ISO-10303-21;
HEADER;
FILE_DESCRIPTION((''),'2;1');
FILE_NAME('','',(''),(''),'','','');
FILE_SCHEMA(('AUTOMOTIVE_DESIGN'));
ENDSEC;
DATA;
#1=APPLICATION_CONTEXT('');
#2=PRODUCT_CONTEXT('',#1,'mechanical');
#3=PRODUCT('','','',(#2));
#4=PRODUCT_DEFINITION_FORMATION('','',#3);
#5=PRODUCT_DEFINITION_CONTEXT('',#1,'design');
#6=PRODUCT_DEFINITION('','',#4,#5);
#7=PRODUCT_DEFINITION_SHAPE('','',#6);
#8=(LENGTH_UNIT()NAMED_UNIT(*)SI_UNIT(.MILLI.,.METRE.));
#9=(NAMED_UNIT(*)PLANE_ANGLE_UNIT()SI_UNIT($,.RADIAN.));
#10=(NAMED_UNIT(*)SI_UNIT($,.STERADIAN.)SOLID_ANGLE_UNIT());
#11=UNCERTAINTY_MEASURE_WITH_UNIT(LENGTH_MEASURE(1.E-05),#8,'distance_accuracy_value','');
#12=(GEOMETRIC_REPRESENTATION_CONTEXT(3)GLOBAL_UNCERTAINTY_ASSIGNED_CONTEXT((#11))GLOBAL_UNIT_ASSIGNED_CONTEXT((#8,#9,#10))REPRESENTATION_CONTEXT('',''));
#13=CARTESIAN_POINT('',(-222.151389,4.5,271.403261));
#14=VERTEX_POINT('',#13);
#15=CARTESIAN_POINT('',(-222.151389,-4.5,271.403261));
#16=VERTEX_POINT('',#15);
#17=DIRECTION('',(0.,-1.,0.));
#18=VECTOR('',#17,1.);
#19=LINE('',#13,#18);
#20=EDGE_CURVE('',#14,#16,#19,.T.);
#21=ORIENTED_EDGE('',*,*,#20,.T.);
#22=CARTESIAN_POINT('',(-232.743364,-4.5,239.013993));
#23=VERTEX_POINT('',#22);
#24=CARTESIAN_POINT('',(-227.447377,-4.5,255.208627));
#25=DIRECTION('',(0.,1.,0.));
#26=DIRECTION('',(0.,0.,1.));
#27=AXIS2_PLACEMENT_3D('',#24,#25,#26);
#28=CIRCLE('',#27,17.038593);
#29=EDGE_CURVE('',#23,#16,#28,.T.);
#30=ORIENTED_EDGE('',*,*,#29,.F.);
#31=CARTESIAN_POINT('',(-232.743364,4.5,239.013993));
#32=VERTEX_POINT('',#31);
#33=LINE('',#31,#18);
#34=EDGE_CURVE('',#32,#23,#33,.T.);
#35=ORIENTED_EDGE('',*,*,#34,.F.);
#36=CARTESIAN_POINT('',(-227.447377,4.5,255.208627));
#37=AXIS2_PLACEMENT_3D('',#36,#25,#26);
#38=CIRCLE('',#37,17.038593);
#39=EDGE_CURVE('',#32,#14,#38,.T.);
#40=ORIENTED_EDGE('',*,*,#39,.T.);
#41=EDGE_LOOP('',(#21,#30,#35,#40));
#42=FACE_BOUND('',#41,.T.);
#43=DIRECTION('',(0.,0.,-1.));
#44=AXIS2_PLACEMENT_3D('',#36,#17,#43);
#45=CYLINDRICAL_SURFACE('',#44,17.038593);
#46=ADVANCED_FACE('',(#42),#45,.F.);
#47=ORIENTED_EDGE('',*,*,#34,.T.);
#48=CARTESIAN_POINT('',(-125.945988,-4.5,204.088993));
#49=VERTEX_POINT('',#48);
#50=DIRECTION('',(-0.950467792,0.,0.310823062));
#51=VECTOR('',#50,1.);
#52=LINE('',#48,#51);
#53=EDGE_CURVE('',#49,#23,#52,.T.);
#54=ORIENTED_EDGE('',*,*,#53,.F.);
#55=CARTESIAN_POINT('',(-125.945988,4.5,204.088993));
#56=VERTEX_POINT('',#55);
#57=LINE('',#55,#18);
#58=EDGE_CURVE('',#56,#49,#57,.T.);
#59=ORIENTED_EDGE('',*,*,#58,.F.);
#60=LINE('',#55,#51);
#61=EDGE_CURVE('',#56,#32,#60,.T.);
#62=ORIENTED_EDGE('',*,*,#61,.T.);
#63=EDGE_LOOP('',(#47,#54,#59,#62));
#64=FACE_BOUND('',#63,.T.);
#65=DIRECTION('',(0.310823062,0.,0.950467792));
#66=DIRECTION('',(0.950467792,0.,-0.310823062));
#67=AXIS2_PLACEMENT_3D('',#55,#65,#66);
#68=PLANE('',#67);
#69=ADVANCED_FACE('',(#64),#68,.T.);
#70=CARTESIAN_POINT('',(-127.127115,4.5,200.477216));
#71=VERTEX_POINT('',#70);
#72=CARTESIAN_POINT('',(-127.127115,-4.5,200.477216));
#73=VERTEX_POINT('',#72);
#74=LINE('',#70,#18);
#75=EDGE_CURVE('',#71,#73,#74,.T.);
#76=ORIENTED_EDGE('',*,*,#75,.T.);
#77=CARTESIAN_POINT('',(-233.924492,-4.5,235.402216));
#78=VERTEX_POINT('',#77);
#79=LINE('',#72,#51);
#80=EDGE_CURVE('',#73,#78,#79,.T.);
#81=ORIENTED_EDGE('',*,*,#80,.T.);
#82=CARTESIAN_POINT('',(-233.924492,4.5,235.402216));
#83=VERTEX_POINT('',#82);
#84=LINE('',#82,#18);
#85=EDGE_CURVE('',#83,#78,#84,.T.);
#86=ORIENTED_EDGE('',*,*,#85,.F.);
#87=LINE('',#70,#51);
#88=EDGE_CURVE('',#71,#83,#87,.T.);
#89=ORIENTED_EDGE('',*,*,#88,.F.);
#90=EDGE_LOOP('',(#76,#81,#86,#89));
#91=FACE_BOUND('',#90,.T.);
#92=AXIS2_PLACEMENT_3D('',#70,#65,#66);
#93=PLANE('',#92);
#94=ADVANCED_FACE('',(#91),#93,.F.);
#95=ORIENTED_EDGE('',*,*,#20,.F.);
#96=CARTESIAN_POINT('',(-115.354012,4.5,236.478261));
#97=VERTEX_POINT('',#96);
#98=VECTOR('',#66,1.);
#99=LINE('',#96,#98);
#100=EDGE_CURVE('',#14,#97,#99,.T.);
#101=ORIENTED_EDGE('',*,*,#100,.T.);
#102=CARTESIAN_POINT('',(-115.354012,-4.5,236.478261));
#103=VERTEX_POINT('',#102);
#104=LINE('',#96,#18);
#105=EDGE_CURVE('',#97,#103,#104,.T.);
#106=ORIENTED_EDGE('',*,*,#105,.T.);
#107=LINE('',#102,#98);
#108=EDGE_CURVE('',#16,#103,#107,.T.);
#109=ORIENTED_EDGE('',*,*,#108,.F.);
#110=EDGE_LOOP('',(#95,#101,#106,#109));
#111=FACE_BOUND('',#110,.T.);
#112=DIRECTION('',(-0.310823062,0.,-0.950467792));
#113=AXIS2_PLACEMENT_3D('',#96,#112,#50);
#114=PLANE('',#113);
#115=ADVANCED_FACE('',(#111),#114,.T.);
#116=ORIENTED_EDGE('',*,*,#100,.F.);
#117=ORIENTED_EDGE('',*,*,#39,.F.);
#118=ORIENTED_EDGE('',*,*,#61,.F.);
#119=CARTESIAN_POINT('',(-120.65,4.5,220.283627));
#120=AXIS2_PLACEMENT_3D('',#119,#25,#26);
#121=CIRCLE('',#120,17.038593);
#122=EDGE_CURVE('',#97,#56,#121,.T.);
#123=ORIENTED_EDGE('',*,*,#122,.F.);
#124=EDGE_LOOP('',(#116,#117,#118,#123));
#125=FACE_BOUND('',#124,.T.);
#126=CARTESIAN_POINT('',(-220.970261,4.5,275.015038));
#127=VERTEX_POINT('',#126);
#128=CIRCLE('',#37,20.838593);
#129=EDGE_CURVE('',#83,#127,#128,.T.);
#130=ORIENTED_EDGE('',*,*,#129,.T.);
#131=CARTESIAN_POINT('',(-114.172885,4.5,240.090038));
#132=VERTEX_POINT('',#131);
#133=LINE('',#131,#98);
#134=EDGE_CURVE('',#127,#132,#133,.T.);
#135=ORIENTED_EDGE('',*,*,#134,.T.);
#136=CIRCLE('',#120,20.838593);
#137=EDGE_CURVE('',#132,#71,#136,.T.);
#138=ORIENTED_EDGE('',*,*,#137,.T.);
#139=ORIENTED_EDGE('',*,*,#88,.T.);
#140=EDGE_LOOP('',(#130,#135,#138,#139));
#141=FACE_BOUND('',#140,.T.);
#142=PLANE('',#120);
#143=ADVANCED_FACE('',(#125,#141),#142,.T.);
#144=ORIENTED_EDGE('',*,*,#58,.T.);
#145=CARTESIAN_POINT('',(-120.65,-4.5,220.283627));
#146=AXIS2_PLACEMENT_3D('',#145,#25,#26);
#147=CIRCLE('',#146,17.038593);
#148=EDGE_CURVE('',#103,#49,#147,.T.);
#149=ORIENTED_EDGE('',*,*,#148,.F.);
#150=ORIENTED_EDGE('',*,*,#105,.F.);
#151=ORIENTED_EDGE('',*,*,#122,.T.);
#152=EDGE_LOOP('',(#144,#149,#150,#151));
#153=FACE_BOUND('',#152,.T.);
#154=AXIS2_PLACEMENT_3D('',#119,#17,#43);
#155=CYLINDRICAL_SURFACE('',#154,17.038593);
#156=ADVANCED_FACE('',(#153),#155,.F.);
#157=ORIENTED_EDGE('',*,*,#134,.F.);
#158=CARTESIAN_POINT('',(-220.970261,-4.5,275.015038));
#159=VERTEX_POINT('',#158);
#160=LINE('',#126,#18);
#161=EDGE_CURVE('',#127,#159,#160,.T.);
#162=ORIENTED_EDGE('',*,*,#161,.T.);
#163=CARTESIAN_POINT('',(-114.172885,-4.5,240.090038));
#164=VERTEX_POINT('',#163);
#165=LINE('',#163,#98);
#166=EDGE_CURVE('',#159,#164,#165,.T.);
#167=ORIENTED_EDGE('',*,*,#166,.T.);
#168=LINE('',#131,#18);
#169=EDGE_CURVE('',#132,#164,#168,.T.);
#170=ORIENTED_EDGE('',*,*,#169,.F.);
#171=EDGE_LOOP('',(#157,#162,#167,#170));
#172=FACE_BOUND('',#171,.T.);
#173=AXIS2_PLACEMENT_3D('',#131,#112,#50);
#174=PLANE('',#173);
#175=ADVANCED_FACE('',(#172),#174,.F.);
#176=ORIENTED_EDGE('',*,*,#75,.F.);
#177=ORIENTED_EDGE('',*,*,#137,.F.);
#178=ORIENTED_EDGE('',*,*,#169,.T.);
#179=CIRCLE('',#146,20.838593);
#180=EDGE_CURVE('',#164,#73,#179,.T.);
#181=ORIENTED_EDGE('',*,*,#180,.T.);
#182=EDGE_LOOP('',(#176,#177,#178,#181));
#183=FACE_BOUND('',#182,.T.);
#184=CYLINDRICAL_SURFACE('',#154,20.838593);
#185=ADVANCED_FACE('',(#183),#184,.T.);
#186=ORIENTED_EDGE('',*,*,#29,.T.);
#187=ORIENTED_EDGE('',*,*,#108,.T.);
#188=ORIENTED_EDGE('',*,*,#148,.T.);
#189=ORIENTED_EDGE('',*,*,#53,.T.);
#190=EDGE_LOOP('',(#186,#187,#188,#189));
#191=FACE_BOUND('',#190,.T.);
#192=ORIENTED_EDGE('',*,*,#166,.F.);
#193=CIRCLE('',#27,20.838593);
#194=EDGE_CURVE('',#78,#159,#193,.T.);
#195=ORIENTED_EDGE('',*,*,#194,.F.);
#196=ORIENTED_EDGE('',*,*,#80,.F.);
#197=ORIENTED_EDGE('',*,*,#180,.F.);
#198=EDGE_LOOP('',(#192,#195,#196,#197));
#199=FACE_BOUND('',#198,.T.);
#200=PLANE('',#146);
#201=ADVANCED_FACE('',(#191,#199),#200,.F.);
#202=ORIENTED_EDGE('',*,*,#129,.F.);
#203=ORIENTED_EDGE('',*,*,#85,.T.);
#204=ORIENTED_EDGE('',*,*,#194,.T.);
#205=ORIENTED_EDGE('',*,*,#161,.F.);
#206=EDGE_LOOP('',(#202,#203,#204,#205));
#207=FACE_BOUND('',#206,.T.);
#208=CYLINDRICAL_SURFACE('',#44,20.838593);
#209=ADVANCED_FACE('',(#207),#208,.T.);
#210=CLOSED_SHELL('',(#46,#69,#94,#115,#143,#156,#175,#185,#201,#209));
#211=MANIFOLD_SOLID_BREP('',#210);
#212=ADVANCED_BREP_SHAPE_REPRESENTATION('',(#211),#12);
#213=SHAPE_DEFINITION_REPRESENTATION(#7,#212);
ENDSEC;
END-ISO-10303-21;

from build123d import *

# Parameters (mm, degrees)
CROQUIS42_R                        = 14.2875
CROQUIS42_R_2                      = 2.4892
CROQUIS42_R_3                      = 9.5631
EXTRUDE_4400_23_P_0501_DEPTH       = 6.35
EXTRUDE_4400_23_P_0502_OUTLINE_R   = 14.2875
EXTRUDE_4400_23_P_0502_OUTLINE_R_2 = 2.4892
EXTRUDE_4400_23_P_0502_DEPTH       = 6.35
CROQUIS47_R                        = 2.4892
CORTAR_EXTRUIR1_DEPTH              = 392.719699627
CROQUIS48_W                        = 203.2
CROQUIS48_H                        = 25.4
SALIENTE_EXTRUIR4_DEPTH            = 25.4
VACIADO1_T                         = -3.175
CROQUIS49_W                        = 50.8
CROQUIS49_H                        = 25.4
SALIENTE_EXTRUIR5_DEPTH            = 152.4
VACIADO2_T                         = -3.175
CROQUIS50_R                        = 14.3129
CROQUIS50_R_2                      = 2.4892
CORTAR_EXTRUIR2_DEPTH              = 539.610187059
CROQUIS53_R                        = 2.4892
SALIENTE_EXTRUIR6_DEPTH            = 3.175
CROQUIS55_R                        = 2.4892
CORTAR_EXTRUIR3_DEPTH              = 28.575
CORTAR_EXTRUIR4_DEPTH              = 420.505185398
CORTAR_EXTRUIR4_DEPTH_BACK         = 420.505185398
CROQUIS56_R                        = 3.2639
CROQUIS57_W                        = 50.8762
CROQUIS57_H                        = 25.4762
CORTAR_EXTRUIR5_DEPTH              = 6.35
SALIENTE_EXTRUIR7_DEPTH            = 4.5
SALIENTE_EXTRUIR9_DEPTH            = 4.5


# Read off the part's stored shape, not the designer's step: 4400-23-P-0502
with BuildPart() as part:
    # Croquis42 → 4400-23-P-0501 (new body)
    with BuildSketch(Plane(origin=(0, 184.15, 0), x_dir=(1, 0, 0), z_dir=(0, 1, 0))):
        with BuildLine():
            Line((88.359188985, 137.182253519), (-88.34651861, 137.182253519))
            ThreePointArc((-88.34651861, 137.182253519), (-105.337250829, 130.662799557), (-113.605912458, 114.451152627))
            Line((-113.605912458, 114.451152627), (-139.101589768, -126.848847373))
            ThreePointArc((-139.101589768, -126.848847373), (-140.353519458, -135.509571637), (-142.264354165, -144.049137401))
            ThreePointArc((-142.264354165, -144.049137401), (-151.832193089, -152.899040942), (-164.816388377, -151.769878826))
            ThreePointArc((-164.816388377, -151.769878826), (-169.567285608, -151.859959078), (-171.875550605, -156.013397612))
            ThreePointArc((-171.875550605, -156.013397612), (-178.08501659, -181.1261948), (-195.856181675, -199.925017686))
            ThreePointArc((-195.856181675, -199.925017686), (-196.402455792, -200.320741342), (-196.887342109, -200.789674047))
            Line((-196.887342109, -200.789674047), (-212.697786669, -218.412409382))
            ThreePointArc((-212.697786669, -218.412409382), (-217.730973382, -222.727024179), (-223.709210874, -225.59225468))
            Line((-223.709210874, -225.59225468), (-235.835713977, -229.557877567))
            ThreePointArc((-235.835713977, -229.557877567), (-253.324996625, -262.868518564), (-220.522053125, -281.292435328))
            Line((-220.522053125, -281.292435328), (-112.095188672, -252.504801968))
            ThreePointArc((-112.095188672, -252.504801968), (-87.673300223, -225.175066373), (-103.110565757, -191.933015956))
            ThreePointArc((-103.110565757, -191.933015956), (-118.079867963, -174.552433995), (-120.357522092, -151.727514948))
            Line((-120.357522092, -151.727514948), (-112.383619234, -113.627514948))
            ThreePointArc((-112.383619234, -113.627514948), (-101.768716069, -96.213982816), (-82.55, -89.391356987))
            ThreePointArc((-82.55, -89.391356987), (-62.030318089, -81.335848201), (-52.471032559, -61.472096599))
            Line((-52.471032559, -61.472096599), (-47.621676919, 3.551545851))
            ThreePointArc((-47.621676919, 3.551545851), (0, 47.753927487), (47.621676919, 3.551545851))
            Line((47.621676919, 3.551545851), (52.471032559, -61.472096599))
            ThreePointArc((52.471032559, -61.472096599), (62.030318089, -81.335848201), (82.55, -89.391356987))
            ThreePointArc((82.55, -89.391356987), (101.768716069, -96.213982816), (112.383619234, -113.627514948))
            Line((112.383619234, -113.627514948), (120.357522092, -151.727514948))
            ThreePointArc((120.357522092, -151.727514948), (118.079867963, -174.552433995), (103.110565757, -191.933015956))
            ThreePointArc((103.110565757, -191.933015956), (87.673300223, -225.175066373), (112.095188672, -252.504801968))
            Line((112.095188672, -252.504801968), (220.522053125, -281.292435328))
            ThreePointArc((220.522053125, -281.292435328), (253.324996625, -262.868518564), (235.835713977, -229.557877567))
            Line((235.835713977, -229.557877567), (223.709210874, -225.59225468))
            ThreePointArc((223.709210874, -225.59225468), (217.730973382, -222.727024179), (212.697786669, -218.412409382))
            Line((212.697786669, -218.412409382), (196.887342109, -200.789674047))
            ThreePointArc((196.887342109, -200.789674047), (196.402455792, -200.320741342), (195.856181675, -199.925017686))
            ThreePointArc((195.856181675, -199.925017686), (178.08501659, -181.1261948), (171.875550605, -156.013397612))
            ThreePointArc((171.875550605, -156.013397612), (169.567285608, -151.859959078), (164.816388377, -151.769878826))
            ThreePointArc((164.816388377, -151.769878826), (152.26322842, -153.039859148), (142.647258285, -144.87115097))
            ThreePointArc((142.647258285, -144.87115097), (140.583371058, -135.914425081), (139.245830086, -126.820825503))
            Line((139.245830086, -126.820825503), (113.617107402, 114.465079877))
            ThreePointArc((113.617107402, 114.465079877), (105.344715331, 130.667483058), (88.359188985, 137.182253519))
        make_face()
        with Locations(Location((-227.447376581, -255.208627108, 0), (0, 0, 270))):
            Circle(CROQUIS42_R, mode=Mode.SUBTRACT)
        with Locations(Location((-193.342405236, -203.970055914, 0), (0, 0, 270))):
            Circle(CROQUIS42_R_2, mode=Mode.SUBTRACT)
        with Locations(Location((-120.65, -220.283627108, 0), (0, 0, 270))):
            Circle(CROQUIS42_R, mode=Mode.SUBTRACT)
        with Locations(Location((-167.113590003, -155.941721458, 0), (0, 0, 270))):
            Circle(CROQUIS42_R_2, mode=Mode.SUBTRACT)
        with Locations(Location((120.65, -220.283627108, 0), (0, 0, 270))):
            Circle(CROQUIS42_R, mode=Mode.SUBTRACT)
        with Locations(Location((227.447376581, -255.208627108, 0), (0, 0, 270))):
            Circle(CROQUIS42_R, mode=Mode.SUBTRACT)
        with Locations(Location((167.113590003, -155.941721458, 0), (0, 0, 270))):
            Circle(CROQUIS42_R_2, mode=Mode.SUBTRACT)
        with Locations(Location((-82.55, -59.228856987, 0), (0, 0, 270))):
            Circle(CROQUIS42_R, mode=Mode.SUBTRACT)
        with Locations(Location((-82.55, 29.266072697, 0), (0, 0, 270))):
            Circle(CROQUIS42_R_2, mode=Mode.SUBTRACT)
        with Locations(Location((-107.95, 54.666072697, 0), (0, 0, 270))):
            Circle(CROQUIS42_R_2, mode=Mode.SUBTRACT)
        with Locations(Location((-82.55, 54.666072697, 0), (0, 0, 270))):
            Circle(CROQUIS42_R_3, mode=Mode.SUBTRACT)
        with Locations(Location((-82.55, 80.066072697, 0), (0, 0, 270))):
            Circle(CROQUIS42_R_2, mode=Mode.SUBTRACT)
        with Locations(Location((-57.15, 54.666072697, 0), (0, 0, 270))):
            Circle(CROQUIS42_R_2, mode=Mode.SUBTRACT)
        with Locations(Location((82.55, -59.228856987, 0), (0, 0, 270))):
            Circle(CROQUIS42_R, mode=Mode.SUBTRACT)
        with Locations(Location((82.55, 29.266072697, 0), (0, 0, 270))):
            Circle(CROQUIS42_R_2, mode=Mode.SUBTRACT)
        with Locations(Location((57.15, 54.666072697, 0), (0, 0, 270))):
            Circle(CROQUIS42_R_2, mode=Mode.SUBTRACT)
        with Locations(Location((82.55, 54.666072697, 0), (0, 0, 270))):
            Circle(CROQUIS42_R_3, mode=Mode.SUBTRACT)
        with Locations(Location((107.95, 54.666072697, 0), (0, 0, 270))):
            Circle(CROQUIS42_R_2, mode=Mode.SUBTRACT)
        with Locations(Location((82.55, 80.066072697, 0), (0, 0, 270))):
            Circle(CROQUIS42_R_2, mode=Mode.SUBTRACT)
        with Locations(Location((193.342405236, -203.970055914, 0), (0, 0, 270))):
            Circle(CROQUIS42_R_2, mode=Mode.SUBTRACT)
    extrude(amount=EXTRUDE_4400_23_P_0501_DEPTH)


with BuildPart() as body_2:
    # 4400-23-P-0502 outline → 4400-23-P-0502 (new body)
    with BuildSketch(Plane(origin=(0, 95.25, 0), x_dir=(1, 0, 0), z_dir=(0, 1, 0))):
        with BuildLine():
            Line((-113.605912458, 114.451152627), (-139.101589768, -126.848847373))
            ThreePointArc((-139.101589768, -126.848847373), (-140.353519458, -135.509571637), (-142.264354165, -144.049137401))
            ThreePointArc((-142.264354165, -144.049137401), (-151.832193089, -152.899040942), (-164.816388377, -151.769878826))
            ThreePointArc((-164.816388377, -151.769878826), (-169.567285608, -151.859959078), (-171.875550605, -156.013397612))
            ThreePointArc((-171.875550605, -156.013397612), (-178.08501659, -181.1261948), (-195.856181675, -199.925017686))
            Line((-195.856181675, -199.925017686), (-212.697786669, -218.412409382))
            ThreePointArc((-212.697786669, -218.412409382), (-217.730973382, -222.727024179), (-223.709210874, -225.59225468))
            Line((-223.709210874, -225.59225468), (-235.835713977, -229.557877567))
            ThreePointArc((-235.835713977, -229.557877567), (-253.324996625, -262.868518564), (-220.522053125, -281.292435328))
            Line((-220.522053125, -281.292435328), (-112.095188672, -252.504801968))
            ThreePointArc((-112.095188672, -252.504801968), (-87.673300223, -225.175066373), (-103.110565757, -191.933015956))
            ThreePointArc((-103.110565757, -191.933015956), (-118.079867963, -174.552433995), (-120.357522092, -151.727514948))
            Line((-120.357522092, -151.727514948), (-112.383619234, -113.627514948))
            ThreePointArc((-112.383619234, -113.627514948), (-100.293200153, -90.736166152), (-77.899975527, -77.74634036))
            ThreePointArc((-77.899975527, -77.74634036), (-67.495099348, -70.970657719), (-63.457595278, -59.228856987))
            Line((-63.457595278, -59.228856987), (-63.457595278, 0))
            ThreePointArc((-63.457595278, 0), (0, 63.457595278), (63.457595278, 0))
            Line((63.457595278, 0), (63.457595278, -59.228856987))
            ThreePointArc((63.457595278, -59.228856987), (67.495099348, -70.970657719), (77.899975527, -77.74634036))
            ThreePointArc((77.899975527, -77.74634036), (100.293200153, -90.736166152), (112.383619234, -113.627514948))
            Line((112.383619234, -113.627514948), (120.357522092, -151.727514948))
            ThreePointArc((120.357522092, -151.727514948), (118.079867963, -174.552433995), (103.110565757, -191.933015956))
            ThreePointArc((103.110565757, -191.933015956), (87.673300223, -225.175066373), (112.095188672, -252.504801968))
            Line((112.095188672, -252.504801968), (220.522053125, -281.292435328))
            ThreePointArc((220.522053125, -281.292435328), (253.324996625, -262.868518564), (235.835713977, -229.557877567))
            Line((235.835713977, -229.557877567), (223.709210874, -225.59225468))
            ThreePointArc((223.709210874, -225.59225468), (217.730973382, -222.727024179), (212.697786669, -218.412409382))
            Line((212.697786669, -218.412409382), (195.856181675, -199.925017686))
            ThreePointArc((195.856181675, -199.925017686), (178.08501659, -181.1261948), (171.875550605, -156.013397612))
            ThreePointArc((171.875550605, -156.013397612), (169.567285608, -151.859959078), (164.816388377, -151.769878826))
            ThreePointArc((164.816388377, -151.769878826), (151.832193089, -152.899040942), (142.264354165, -144.049137401))
            ThreePointArc((142.264354165, -144.049137401), (140.353519458, -135.509571637), (139.101589768, -126.848847373))
            Line((139.101589768, -126.848847373), (113.605912458, 114.451152627))
            ThreePointArc((113.605912458, 114.451152627), (105.341959426, 130.658561195), (88.359188984, 137.182250359))
            Line((88.359188984, 137.182250359), (-88.34651861, 137.182253519))
            ThreePointArc((-88.34651861, 137.182253519), (-105.337250829, 130.662799557), (-113.605912458, 114.451152627))
        make_face()
        with Locations((-227.447376581, -255.208627108)):
            Circle(EXTRUDE_4400_23_P_0502_OUTLINE_R, mode=Mode.SUBTRACT)
        with Locations((-193.342405236, -203.970055914)):
            Circle(EXTRUDE_4400_23_P_0502_OUTLINE_R_2, mode=Mode.SUBTRACT)
        with Locations((-120.65, -220.283627108)):
            Circle(EXTRUDE_4400_23_P_0502_OUTLINE_R, mode=Mode.SUBTRACT)
        with Locations((-167.113590003, -155.941721458)):
            Circle(EXTRUDE_4400_23_P_0502_OUTLINE_R_2, mode=Mode.SUBTRACT)
        with Locations((120.65, -220.283627108)):
            Circle(EXTRUDE_4400_23_P_0502_OUTLINE_R, mode=Mode.SUBTRACT)
        with Locations((227.447376581, -255.208627108)):
            Circle(EXTRUDE_4400_23_P_0502_OUTLINE_R, mode=Mode.SUBTRACT)
        with Locations((193.342405236, -203.970055914)):
            Circle(EXTRUDE_4400_23_P_0502_OUTLINE_R_2, mode=Mode.SUBTRACT)
        with Locations((167.113590003, -155.941721458)):
            Circle(EXTRUDE_4400_23_P_0502_OUTLINE_R_2, mode=Mode.SUBTRACT)
        with Locations((-82.55, -59.228856987)):
            Circle(EXTRUDE_4400_23_P_0502_OUTLINE_R, mode=Mode.SUBTRACT)
        with Locations((82.55, -59.228856987)):
            Circle(EXTRUDE_4400_23_P_0502_OUTLINE_R, mode=Mode.SUBTRACT)
    extrude(amount=EXTRUDE_4400_23_P_0502_DEPTH)


with BuildPart() as cortar_extruir1_tool:
    # Croquis47 → Cortar-Extruir1 (new, through all)
    with BuildSketch(Plane(origin=(0, 190.5, 0), x_dir=(1, 0, 0), z_dir=(0, 1, 0))):
        with Locations(Location((-131.508664667, -129.403842106, 0), (0, 0, 270))):
            Circle(CROQUIS47_R)
        with Locations(Location((-191.907087884, -241.47917412, 0), (0, 0, 270))):
            Circle(CROQUIS47_R)
        with Locations(Location((131.508664667, -129.403842106, 0), (0, 0, 270))):
            Circle(CROQUIS47_R)
        with Locations(Location((-117.606595202, -5.496427303, 0), (0, 0, 270))):
            Circle(CROQUIS47_R)
        with Locations(Location((-116.361466228, 16.971143013, 0), (0, 0, 270))):
            Circle(CROQUIS47_R)
        with Locations(Location((116.361466228, 16.971143013, 0), (0, 0, 270))):
            Circle(CROQUIS47_R)
        with Locations(Location((117.606595202, -5.496427303, 0), (0, 0, 270))):
            Circle(CROQUIS47_R)
        with Locations(Location((38.8975, 62.847528811, 0), (0, 0, 270))):
            Circle(CROQUIS47_R)
        with Locations(Location((4.820590175, 80.776381017, 0), (0, 0, 270))):
            Circle(CROQUIS47_R)
        with Locations(Location((-37.776259667, 66.128159842, 0), (0, 0, 270))):
            Circle(CROQUIS47_R)
        with Locations(Location((-84.246357442, 7.676072697, 0), (0, 0, 270))):
            Circle(CROQUIS47_R)
        with Locations(Location((191.907087884, -241.47917412, 0), (0, 0, 270))):
            Circle(CROQUIS47_R)
        with Locations(Location((84.246357442, 7.676072697, 0), (0, 0, 270))):
            Circle(CROQUIS47_R)
    extrude(amount=-CORTAR_EXTRUIR1_DEPTH)


with BuildPart() as part_1:
    add(part.part)

    # Cortar-Extruir1: cut by cortar_extruir1_tool
    add(cortar_extruir1_tool.part, mode=Mode.SUBTRACT)


with BuildPart() as body_2_1:
    add(body_2.part)

    # Cortar-Extruir1: cut by cortar_extruir1_tool
    add(cortar_extruir1_tool.part, mode=Mode.SUBTRACT)


with BuildPart() as body_3:
    # Croquis48 → Saliente-Extruir4 (new body)
    with BuildSketch(Plane(origin=(0, 101.6, 0), x_dir=(1, 0, 0), z_dir=(0, 1, 0))):
        with Locations((0, 114.3)):
            Rectangle(CROQUIS48_W, CROQUIS48_H)
    extrude(amount=SALIENTE_EXTRUIR4_DEPTH)

    # Vaciado1
    vaciado1_openings = [body_3.faces().sort_by_distance(p)[0] for p in [
        (-101.6, 114.3, -114.3),
        (101.6, 114.3, -114.3),
    ]]
    offset(amount=VACIADO1_T, openings=vaciado1_openings, kind=Kind.INTERSECTION)


with BuildPart() as body_4:
    # Croquis49 → Saliente-Extruir5 (new body)
    with BuildSketch(Plane(origin=(0, 127, 0), x_dir=(1, 0, 0), z_dir=(0, 1, 0))):
        with Locations((0, 114.3)):
            Rectangle(CROQUIS49_W, CROQUIS49_H)
    extrude(amount=SALIENTE_EXTRUIR5_DEPTH)

    # Vaciado2
    vaciado2_openings = [body_4.faces().sort_by_distance(p)[0] for p in [
        (0, 279.4, -114.3),
        (0, 127, -114.3),
    ]]
    offset(amount=VACIADO2_T, openings=vaciado2_openings, kind=Kind.INTERSECTION)

    # Croquis50 → Cortar-Extruir2 (cut, through all)
    with BuildSketch(Plane.XY.offset(-101.6)):
        with Locations((0, 241.2619)):
            Circle(CROQUIS50_R)
        with Locations((11.90625, 261.884129928)):
            Circle(CROQUIS50_R_2)
        with Locations((11.90625, 220.639670072)):
            Circle(CROQUIS50_R_2)
        with Locations((-11.90625, 220.639670072)):
            Circle(CROQUIS50_R_2)
        with Locations((-11.90625, 261.884129928)):
            Circle(CROQUIS50_R_2)
    extrude(amount=-CORTAR_EXTRUIR2_DEPTH, mode=Mode.SUBTRACT)


with BuildPart() as body_5:
    # Croquis53 → Saliente-Extruir6 (new body)
    with BuildSketch(Plane.XY.offset(-101.6)):
        with BuildLine():
            Line((50.8, 101.6), (-50.8, 101.6))
            ThreePointArc((-50.8, 101.6), (-55.290128061, 103.459871939), (-57.15, 107.95))
            Line((-57.15, 107.95), (-57.15, 125.348133557))
            ThreePointArc((-57.15, 125.348133557), (-56.945468654, 126.946793942), (-56.345050385, 128.44246971))
            Line((-56.345050385, 128.44246971), (-27.216776701, 180.640336153))
            ThreePointArc((-27.216776701, 180.640336153), (-24.886805275, 183.021926158), (-21.671726315, 183.896))
            Line((-21.671726315, 183.896), (21.671726315, 183.896))
            ThreePointArc((21.671726315, 183.896), (24.886805275, 183.021926158), (27.216776701, 180.640336153))
            Line((27.216776701, 180.640336153), (56.345050385, 128.44246971))
            ThreePointArc((56.345050385, 128.44246971), (56.945468654, 126.946793942), (57.15, 125.348133557))
            Line((57.15, 125.348133557), (57.15, 107.95))
            ThreePointArc((57.15, 107.95), (55.290128061, 103.459871939), (50.8, 101.6))
        make_face()
        with Locations((0, 114.3)):
            Circle(CROQUIS53_R, mode=Mode.SUBTRACT)
        with Locations((12.7, 114.3)):
            Circle(CROQUIS53_R, mode=Mode.SUBTRACT)
        with Locations((25.4, 114.3)):
            Circle(CROQUIS53_R, mode=Mode.SUBTRACT)
        with Locations((38.1, 114.3)):
            Circle(CROQUIS53_R, mode=Mode.SUBTRACT)
        with Locations((50.8, 114.3)):
            Circle(CROQUIS53_R, mode=Mode.SUBTRACT)
        with Locations(Location((-50.8, 114.3, 0), (0, 0, 180))):
            Circle(CROQUIS53_R, mode=Mode.SUBTRACT)
        with Locations(Location((-38.1, 114.3, 0), (0, 0, 180))):
            Circle(CROQUIS53_R, mode=Mode.SUBTRACT)
        with Locations(Location((-25.4, 114.3, 0), (0, 0, 180))):
            Circle(CROQUIS53_R, mode=Mode.SUBTRACT)
        with Locations(Location((-12.7, 114.3, 0), (0, 0, 180))):
            Circle(CROQUIS53_R, mode=Mode.SUBTRACT)
        with Locations(Location((-12.7, 139.7, 0), (0, 0, 180))):
            Circle(CROQUIS53_R, mode=Mode.SUBTRACT)
        with Locations((12.7, 139.7)):
            Circle(CROQUIS53_R, mode=Mode.SUBTRACT)
        with Locations(Location((-12.7, 152.4, 0), (0, 0, 180))):
            Circle(CROQUIS53_R, mode=Mode.SUBTRACT)
        with Locations((12.7, 152.4)):
            Circle(CROQUIS53_R, mode=Mode.SUBTRACT)
        with Locations(Location((-12.7, 165.1, 0), (0, 0, 180))):
            Circle(CROQUIS53_R, mode=Mode.SUBTRACT)
        with Locations((12.7, 165.1)):
            Circle(CROQUIS53_R, mode=Mode.SUBTRACT)
        with Locations(Location((-12.7, 177.8, 0), (0, 0, 180))):
            Circle(CROQUIS53_R, mode=Mode.SUBTRACT)
        with Locations((12.7, 177.8)):
            Circle(CROQUIS53_R, mode=Mode.SUBTRACT)
    extrude(amount=SALIENTE_EXTRUIR6_DEPTH)


with BuildPart() as cortar_extruir3_tool:
    # Croquis55 → Cortar-Extruir3 (new body)
    with BuildSketch(Plane.XY.offset(-98.425)):
        with Locations(Location((-12.7, 114.3, 0), (0, 0, 180))):
            Circle(CROQUIS55_R)
        with Locations(Location((-12.7, 139.7, 0), (0, 0, 180))):
            Circle(CROQUIS55_R)
        with Locations(Location((-25.4, 114.3, 0), (0, 0, 180))):
            Circle(CROQUIS55_R)
        with Locations(Location((-38.1, 114.3, 0), (0, 0, 180))):
            Circle(CROQUIS55_R)
        with Locations(Location((-50.8, 114.3, 0), (0, 0, 180))):
            Circle(CROQUIS55_R)
        with Locations(Location((-12.7, 165.1, 0), (0, 0, 180))):
            Circle(CROQUIS55_R)
        with Locations(Location((-12.7, 152.4, 0), (0, 0, 180))):
            Circle(CROQUIS55_R)
        with Locations(Location((-12.7, 177.8, 0), (0, 0, 180))):
            Circle(CROQUIS55_R)
        with Locations((12.7, 165.1)):
            Circle(CROQUIS55_R)
        with Locations((12.7, 177.8)):
            Circle(CROQUIS55_R)
        with Locations((0, 114.3)):
            Circle(CROQUIS55_R)
        with Locations((12.7, 114.3)):
            Circle(CROQUIS55_R)
        with Locations((12.7, 139.7)):
            Circle(CROQUIS55_R)
        with Locations((12.7, 152.4)):
            Circle(CROQUIS55_R)
        with Locations((50.8, 114.3)):
            Circle(CROQUIS55_R)
        with Locations((38.1, 114.3)):
            Circle(CROQUIS55_R)
        with Locations((25.4, 114.3)):
            Circle(CROQUIS55_R)
    extrude(amount=-CORTAR_EXTRUIR3_DEPTH)


with BuildPart() as body_3_1:
    add(body_3.part)

    # Cortar-Extruir3: cut by cortar_extruir3_tool
    add(cortar_extruir3_tool.part, mode=Mode.SUBTRACT)


with BuildPart() as body_4_1:
    add(body_4.part)

    # Cortar-Extruir3: cut by cortar_extruir3_tool
    add(cortar_extruir3_tool.part, mode=Mode.SUBTRACT)


with BuildPart() as cortar_extruir4_tool:
    # Croquis56 → Cortar-Extruir4 (new, two sides: drawn at the far end of the back side and taken through both)
    with BuildSketch(Plane.XZ.offset(-101.6).offset(-CORTAR_EXTRUIR4_DEPTH_BACK)):
        with Locations(Location((-47.625, -114.3, 0), (0, 0, 90))):
            Circle(CROQUIS56_R)
        with Locations(Location((-79.375, -114.3, 0), (0, 0, 90))):
            Circle(CROQUIS56_R)
        with Locations(Location((79.375, -114.3, 0), (0, 0, 90))):
            Circle(CROQUIS56_R)
        with Locations(Location((47.625, -114.3, 0), (0, 0, 90))):
            Circle(CROQUIS56_R)
    extrude(amount=CORTAR_EXTRUIR4_DEPTH + CORTAR_EXTRUIR4_DEPTH_BACK)


with BuildPart() as part_2:
    add(part_1.part)

    # Cortar-Extruir4: cut by cortar_extruir4_tool
    add(cortar_extruir4_tool.part, mode=Mode.SUBTRACT)

    # Croquis57 → Cortar-Extruir5 (cut)
    with BuildSketch(Plane(origin=(0, 190.5, 0), x_dir=(1, 0, 0), z_dir=(0, 1, 0))):
        with Locations((0, 114.3)):
            Rectangle(CROQUIS57_W, CROQUIS57_H)
    extrude(amount=-CORTAR_EXTRUIR5_DEPTH, mode=Mode.SUBTRACT)


with BuildPart() as body_2_2:
    add(body_2_1.part)

    # Cortar-Extruir4: cut by cortar_extruir4_tool
    add(cortar_extruir4_tool.part, mode=Mode.SUBTRACT)


with BuildPart() as body_3_2:
    add(body_3_1.part)

    # Cortar-Extruir4: cut by cortar_extruir4_tool
    add(cortar_extruir4_tool.part, mode=Mode.SUBTRACT)


with BuildPart() as body_2_2_1:
    # Croquis11 → Saliente-Extruir7 (new, symmetric)
    with BuildSketch(Plane(origin=(0, 184.15, 0), x_dir=(1, 0, 0), z_dir=(0, 1, 0))):
        with BuildLine():
            Line((-109.07688548, -54.716778872), (-101.851570328, -12.238545402))
            ThreePointArc((-101.851570328, -12.238545402), (-103.966471358, -13.163959782), (-106.037145911, -14.184501326))
            Line((-106.037145911, -14.184501326), (-112.823079171, -54.079571818))
            ThreePointArc((-112.823079171, -54.079571818), (-112.569902429, -65.692595716), (-108.021298601, -76.380749238))
            Line((-108.021298601, -76.380749238), (-106.74780526, -70.997489991))
            ThreePointArc((-106.74780526, -70.997489991), (-109.186703086, -63.039441048), (-109.07688548, -54.716778872))
        make_face()
        with BuildLine():
            Line((-101.851570328, -12.238545402), (-95.105873566, 27.419971343))
            ThreePointArc((-95.105873566, 27.419971343), (-96.901921658, 28.321768859), (-98.633561075, 29.34179456))
            Line((-98.633561075, 29.34179456), (-106.037145911, -14.184501326))
            ThreePointArc((-106.037145911, -14.184501326), (-103.966471358, -13.163959782), (-101.851570328, -12.238545402))
        make_face()
        with BuildLine():
            ThreePointArc((-66.466438925, 29.34179456), (-68.198078342, 28.321768859), (-69.994126434, 27.419971343))
            Line((-69.994126434, 27.419971343), (-63.248429672, -12.238545402))
            ThreePointArc((-63.248429672, -12.238545402), (-61.133528642, -13.163959782), (-59.062854089, -14.184501326))
            Line((-59.062854089, -14.184501326), (-66.466438925, 29.34179456))
        make_face()
        with BuildLine():
            ThreePointArc((-59.062854089, -14.184501326), (-61.133528642, -13.163959782), (-63.248429672, -12.238545402))
            Line((-63.248429672, -12.238545402), (-56.02311452, -54.716778872))
            ThreePointArc((-56.02311452, -54.716778872), (-57.505982376, -69.069166098), (-66.190042872, -80.59205677))
            Line((-66.190042872, -80.59205677), (-67.463536214, -85.975316017))
            ThreePointArc((-67.463536214, -85.975316017), (-54.824440333, -72.429910028), (-52.276920829, -54.079571818))
            Line((-52.276920829, -54.079571818), (-59.062854089, -14.184501326))
        make_face()
        with BuildLine():
            Line((-95.105873566, 27.419971343), (-90.248720244, 55.975582898))
            ThreePointArc((-90.248720244, 55.975582898), (-82.55, 62.475369103), (-74.851279756, 55.975582898))
            Line((-74.851279756, 55.975582898), (-69.994126434, 27.419971343))
            ThreePointArc((-69.994126434, 27.419971343), (-68.198078342, 28.321768859), (-66.466438925, 29.34179456))
            Line((-66.466438925, 29.34179456), (-71.105086065, 56.612789952))
            ThreePointArc((-71.105086065, 56.612789952), (-82.55, 66.275369103), (-93.994913935, 56.612789952))
            Line((-93.994913935, 56.612789952), (-98.633561075, 29.34179456))
            ThreePointArc((-98.633561075, 29.34179456), (-96.901921658, 28.321768859), (-95.105873566, 27.419971343))
        make_face()
        with BuildLine():
            ThreePointArc((-70.763429712, -83.417930202), (-88.744505126, -85.414017067), (-103.925323363, -75.572970707))
            Line((-103.925323363, -75.572970707), (-105.012211918, -80.16742179))
            ThreePointArc((-105.012211918, -80.16742179), (-89.619308767, -89.111951435), (-71.850318266, -88.012381285))
            Line((-71.850318266, -88.012381285), (-70.763429712, -83.417930202))
        make_face()
        with BuildLine():
            ThreePointArc((-103.925323363, -75.572970707), (-105.451119385, -73.355896065), (-106.74780526, -70.997489991))
            Line((-106.74780526, -70.997489991), (-108.021298601, -76.380749238))
            ThreePointArc((-108.021298601, -76.380749238), (-106.591424249, -78.333421371), (-105.012211918, -80.16742179))
            Line((-105.012211918, -80.16742179), (-103.925323363, -75.572970707))
        make_face()
        with BuildLine():
            Line((-67.463536214, -85.975316017), (-66.190042872, -80.59205677))
            ThreePointArc((-66.190042872, -80.59205677), (-68.405985663, -82.119496135), (-70.763429712, -83.417930202))
            Line((-70.763429712, -83.417930202), (-71.850318266, -88.012381285))
            ThreePointArc((-71.850318266, -88.012381285), (-69.616758568, -87.080351135), (-67.463536214, -85.975316017))
        make_face()
    extrude(amount=SALIENTE_EXTRUIR7_DEPTH, both=True)


with BuildPart() as body_2_3:
    # Croquis61 → Saliente-Extruir9 (new, symmetric)
    with BuildSketch(Plane(origin=(0, 0, 0), x_dir=(1, 0, 0), z_dir=(0, 1, 0))):
        with BuildLine():
            Line((-114.172884767, -240.090038409), (-220.970261348, -275.015038409))
            ThreePointArc((-220.970261348, -275.015038409), (-247.253787883, -261.685742341), (-233.924491814, -235.402215806))
            Line((-233.924491814, -235.402215806), (-127.127115233, -200.477215806))
            ThreePointArc((-127.127115233, -200.477215806), (-100.843588699, -213.806511874), (-114.172884767, -240.090038409))
        make_face()
        with BuildLine():
            Line((-115.354012404, -236.478260799), (-222.151388985, -271.403260799))
            ThreePointArc((-222.151388985, -271.403260799), (-243.642010273, -260.504614704), (-232.743364177, -239.013993416))
            Line((-232.743364177, -239.013993416), (-125.945987596, -204.088993416))
            ThreePointArc((-125.945987596, -204.088993416), (-104.455366309, -214.987639511), (-115.354012404, -236.478260799))
        make_face(mode=Mode.SUBTRACT)
    extrude(amount=SALIENTE_EXTRUIR9_DEPTH, both=True)


solid = body_2_3.part
